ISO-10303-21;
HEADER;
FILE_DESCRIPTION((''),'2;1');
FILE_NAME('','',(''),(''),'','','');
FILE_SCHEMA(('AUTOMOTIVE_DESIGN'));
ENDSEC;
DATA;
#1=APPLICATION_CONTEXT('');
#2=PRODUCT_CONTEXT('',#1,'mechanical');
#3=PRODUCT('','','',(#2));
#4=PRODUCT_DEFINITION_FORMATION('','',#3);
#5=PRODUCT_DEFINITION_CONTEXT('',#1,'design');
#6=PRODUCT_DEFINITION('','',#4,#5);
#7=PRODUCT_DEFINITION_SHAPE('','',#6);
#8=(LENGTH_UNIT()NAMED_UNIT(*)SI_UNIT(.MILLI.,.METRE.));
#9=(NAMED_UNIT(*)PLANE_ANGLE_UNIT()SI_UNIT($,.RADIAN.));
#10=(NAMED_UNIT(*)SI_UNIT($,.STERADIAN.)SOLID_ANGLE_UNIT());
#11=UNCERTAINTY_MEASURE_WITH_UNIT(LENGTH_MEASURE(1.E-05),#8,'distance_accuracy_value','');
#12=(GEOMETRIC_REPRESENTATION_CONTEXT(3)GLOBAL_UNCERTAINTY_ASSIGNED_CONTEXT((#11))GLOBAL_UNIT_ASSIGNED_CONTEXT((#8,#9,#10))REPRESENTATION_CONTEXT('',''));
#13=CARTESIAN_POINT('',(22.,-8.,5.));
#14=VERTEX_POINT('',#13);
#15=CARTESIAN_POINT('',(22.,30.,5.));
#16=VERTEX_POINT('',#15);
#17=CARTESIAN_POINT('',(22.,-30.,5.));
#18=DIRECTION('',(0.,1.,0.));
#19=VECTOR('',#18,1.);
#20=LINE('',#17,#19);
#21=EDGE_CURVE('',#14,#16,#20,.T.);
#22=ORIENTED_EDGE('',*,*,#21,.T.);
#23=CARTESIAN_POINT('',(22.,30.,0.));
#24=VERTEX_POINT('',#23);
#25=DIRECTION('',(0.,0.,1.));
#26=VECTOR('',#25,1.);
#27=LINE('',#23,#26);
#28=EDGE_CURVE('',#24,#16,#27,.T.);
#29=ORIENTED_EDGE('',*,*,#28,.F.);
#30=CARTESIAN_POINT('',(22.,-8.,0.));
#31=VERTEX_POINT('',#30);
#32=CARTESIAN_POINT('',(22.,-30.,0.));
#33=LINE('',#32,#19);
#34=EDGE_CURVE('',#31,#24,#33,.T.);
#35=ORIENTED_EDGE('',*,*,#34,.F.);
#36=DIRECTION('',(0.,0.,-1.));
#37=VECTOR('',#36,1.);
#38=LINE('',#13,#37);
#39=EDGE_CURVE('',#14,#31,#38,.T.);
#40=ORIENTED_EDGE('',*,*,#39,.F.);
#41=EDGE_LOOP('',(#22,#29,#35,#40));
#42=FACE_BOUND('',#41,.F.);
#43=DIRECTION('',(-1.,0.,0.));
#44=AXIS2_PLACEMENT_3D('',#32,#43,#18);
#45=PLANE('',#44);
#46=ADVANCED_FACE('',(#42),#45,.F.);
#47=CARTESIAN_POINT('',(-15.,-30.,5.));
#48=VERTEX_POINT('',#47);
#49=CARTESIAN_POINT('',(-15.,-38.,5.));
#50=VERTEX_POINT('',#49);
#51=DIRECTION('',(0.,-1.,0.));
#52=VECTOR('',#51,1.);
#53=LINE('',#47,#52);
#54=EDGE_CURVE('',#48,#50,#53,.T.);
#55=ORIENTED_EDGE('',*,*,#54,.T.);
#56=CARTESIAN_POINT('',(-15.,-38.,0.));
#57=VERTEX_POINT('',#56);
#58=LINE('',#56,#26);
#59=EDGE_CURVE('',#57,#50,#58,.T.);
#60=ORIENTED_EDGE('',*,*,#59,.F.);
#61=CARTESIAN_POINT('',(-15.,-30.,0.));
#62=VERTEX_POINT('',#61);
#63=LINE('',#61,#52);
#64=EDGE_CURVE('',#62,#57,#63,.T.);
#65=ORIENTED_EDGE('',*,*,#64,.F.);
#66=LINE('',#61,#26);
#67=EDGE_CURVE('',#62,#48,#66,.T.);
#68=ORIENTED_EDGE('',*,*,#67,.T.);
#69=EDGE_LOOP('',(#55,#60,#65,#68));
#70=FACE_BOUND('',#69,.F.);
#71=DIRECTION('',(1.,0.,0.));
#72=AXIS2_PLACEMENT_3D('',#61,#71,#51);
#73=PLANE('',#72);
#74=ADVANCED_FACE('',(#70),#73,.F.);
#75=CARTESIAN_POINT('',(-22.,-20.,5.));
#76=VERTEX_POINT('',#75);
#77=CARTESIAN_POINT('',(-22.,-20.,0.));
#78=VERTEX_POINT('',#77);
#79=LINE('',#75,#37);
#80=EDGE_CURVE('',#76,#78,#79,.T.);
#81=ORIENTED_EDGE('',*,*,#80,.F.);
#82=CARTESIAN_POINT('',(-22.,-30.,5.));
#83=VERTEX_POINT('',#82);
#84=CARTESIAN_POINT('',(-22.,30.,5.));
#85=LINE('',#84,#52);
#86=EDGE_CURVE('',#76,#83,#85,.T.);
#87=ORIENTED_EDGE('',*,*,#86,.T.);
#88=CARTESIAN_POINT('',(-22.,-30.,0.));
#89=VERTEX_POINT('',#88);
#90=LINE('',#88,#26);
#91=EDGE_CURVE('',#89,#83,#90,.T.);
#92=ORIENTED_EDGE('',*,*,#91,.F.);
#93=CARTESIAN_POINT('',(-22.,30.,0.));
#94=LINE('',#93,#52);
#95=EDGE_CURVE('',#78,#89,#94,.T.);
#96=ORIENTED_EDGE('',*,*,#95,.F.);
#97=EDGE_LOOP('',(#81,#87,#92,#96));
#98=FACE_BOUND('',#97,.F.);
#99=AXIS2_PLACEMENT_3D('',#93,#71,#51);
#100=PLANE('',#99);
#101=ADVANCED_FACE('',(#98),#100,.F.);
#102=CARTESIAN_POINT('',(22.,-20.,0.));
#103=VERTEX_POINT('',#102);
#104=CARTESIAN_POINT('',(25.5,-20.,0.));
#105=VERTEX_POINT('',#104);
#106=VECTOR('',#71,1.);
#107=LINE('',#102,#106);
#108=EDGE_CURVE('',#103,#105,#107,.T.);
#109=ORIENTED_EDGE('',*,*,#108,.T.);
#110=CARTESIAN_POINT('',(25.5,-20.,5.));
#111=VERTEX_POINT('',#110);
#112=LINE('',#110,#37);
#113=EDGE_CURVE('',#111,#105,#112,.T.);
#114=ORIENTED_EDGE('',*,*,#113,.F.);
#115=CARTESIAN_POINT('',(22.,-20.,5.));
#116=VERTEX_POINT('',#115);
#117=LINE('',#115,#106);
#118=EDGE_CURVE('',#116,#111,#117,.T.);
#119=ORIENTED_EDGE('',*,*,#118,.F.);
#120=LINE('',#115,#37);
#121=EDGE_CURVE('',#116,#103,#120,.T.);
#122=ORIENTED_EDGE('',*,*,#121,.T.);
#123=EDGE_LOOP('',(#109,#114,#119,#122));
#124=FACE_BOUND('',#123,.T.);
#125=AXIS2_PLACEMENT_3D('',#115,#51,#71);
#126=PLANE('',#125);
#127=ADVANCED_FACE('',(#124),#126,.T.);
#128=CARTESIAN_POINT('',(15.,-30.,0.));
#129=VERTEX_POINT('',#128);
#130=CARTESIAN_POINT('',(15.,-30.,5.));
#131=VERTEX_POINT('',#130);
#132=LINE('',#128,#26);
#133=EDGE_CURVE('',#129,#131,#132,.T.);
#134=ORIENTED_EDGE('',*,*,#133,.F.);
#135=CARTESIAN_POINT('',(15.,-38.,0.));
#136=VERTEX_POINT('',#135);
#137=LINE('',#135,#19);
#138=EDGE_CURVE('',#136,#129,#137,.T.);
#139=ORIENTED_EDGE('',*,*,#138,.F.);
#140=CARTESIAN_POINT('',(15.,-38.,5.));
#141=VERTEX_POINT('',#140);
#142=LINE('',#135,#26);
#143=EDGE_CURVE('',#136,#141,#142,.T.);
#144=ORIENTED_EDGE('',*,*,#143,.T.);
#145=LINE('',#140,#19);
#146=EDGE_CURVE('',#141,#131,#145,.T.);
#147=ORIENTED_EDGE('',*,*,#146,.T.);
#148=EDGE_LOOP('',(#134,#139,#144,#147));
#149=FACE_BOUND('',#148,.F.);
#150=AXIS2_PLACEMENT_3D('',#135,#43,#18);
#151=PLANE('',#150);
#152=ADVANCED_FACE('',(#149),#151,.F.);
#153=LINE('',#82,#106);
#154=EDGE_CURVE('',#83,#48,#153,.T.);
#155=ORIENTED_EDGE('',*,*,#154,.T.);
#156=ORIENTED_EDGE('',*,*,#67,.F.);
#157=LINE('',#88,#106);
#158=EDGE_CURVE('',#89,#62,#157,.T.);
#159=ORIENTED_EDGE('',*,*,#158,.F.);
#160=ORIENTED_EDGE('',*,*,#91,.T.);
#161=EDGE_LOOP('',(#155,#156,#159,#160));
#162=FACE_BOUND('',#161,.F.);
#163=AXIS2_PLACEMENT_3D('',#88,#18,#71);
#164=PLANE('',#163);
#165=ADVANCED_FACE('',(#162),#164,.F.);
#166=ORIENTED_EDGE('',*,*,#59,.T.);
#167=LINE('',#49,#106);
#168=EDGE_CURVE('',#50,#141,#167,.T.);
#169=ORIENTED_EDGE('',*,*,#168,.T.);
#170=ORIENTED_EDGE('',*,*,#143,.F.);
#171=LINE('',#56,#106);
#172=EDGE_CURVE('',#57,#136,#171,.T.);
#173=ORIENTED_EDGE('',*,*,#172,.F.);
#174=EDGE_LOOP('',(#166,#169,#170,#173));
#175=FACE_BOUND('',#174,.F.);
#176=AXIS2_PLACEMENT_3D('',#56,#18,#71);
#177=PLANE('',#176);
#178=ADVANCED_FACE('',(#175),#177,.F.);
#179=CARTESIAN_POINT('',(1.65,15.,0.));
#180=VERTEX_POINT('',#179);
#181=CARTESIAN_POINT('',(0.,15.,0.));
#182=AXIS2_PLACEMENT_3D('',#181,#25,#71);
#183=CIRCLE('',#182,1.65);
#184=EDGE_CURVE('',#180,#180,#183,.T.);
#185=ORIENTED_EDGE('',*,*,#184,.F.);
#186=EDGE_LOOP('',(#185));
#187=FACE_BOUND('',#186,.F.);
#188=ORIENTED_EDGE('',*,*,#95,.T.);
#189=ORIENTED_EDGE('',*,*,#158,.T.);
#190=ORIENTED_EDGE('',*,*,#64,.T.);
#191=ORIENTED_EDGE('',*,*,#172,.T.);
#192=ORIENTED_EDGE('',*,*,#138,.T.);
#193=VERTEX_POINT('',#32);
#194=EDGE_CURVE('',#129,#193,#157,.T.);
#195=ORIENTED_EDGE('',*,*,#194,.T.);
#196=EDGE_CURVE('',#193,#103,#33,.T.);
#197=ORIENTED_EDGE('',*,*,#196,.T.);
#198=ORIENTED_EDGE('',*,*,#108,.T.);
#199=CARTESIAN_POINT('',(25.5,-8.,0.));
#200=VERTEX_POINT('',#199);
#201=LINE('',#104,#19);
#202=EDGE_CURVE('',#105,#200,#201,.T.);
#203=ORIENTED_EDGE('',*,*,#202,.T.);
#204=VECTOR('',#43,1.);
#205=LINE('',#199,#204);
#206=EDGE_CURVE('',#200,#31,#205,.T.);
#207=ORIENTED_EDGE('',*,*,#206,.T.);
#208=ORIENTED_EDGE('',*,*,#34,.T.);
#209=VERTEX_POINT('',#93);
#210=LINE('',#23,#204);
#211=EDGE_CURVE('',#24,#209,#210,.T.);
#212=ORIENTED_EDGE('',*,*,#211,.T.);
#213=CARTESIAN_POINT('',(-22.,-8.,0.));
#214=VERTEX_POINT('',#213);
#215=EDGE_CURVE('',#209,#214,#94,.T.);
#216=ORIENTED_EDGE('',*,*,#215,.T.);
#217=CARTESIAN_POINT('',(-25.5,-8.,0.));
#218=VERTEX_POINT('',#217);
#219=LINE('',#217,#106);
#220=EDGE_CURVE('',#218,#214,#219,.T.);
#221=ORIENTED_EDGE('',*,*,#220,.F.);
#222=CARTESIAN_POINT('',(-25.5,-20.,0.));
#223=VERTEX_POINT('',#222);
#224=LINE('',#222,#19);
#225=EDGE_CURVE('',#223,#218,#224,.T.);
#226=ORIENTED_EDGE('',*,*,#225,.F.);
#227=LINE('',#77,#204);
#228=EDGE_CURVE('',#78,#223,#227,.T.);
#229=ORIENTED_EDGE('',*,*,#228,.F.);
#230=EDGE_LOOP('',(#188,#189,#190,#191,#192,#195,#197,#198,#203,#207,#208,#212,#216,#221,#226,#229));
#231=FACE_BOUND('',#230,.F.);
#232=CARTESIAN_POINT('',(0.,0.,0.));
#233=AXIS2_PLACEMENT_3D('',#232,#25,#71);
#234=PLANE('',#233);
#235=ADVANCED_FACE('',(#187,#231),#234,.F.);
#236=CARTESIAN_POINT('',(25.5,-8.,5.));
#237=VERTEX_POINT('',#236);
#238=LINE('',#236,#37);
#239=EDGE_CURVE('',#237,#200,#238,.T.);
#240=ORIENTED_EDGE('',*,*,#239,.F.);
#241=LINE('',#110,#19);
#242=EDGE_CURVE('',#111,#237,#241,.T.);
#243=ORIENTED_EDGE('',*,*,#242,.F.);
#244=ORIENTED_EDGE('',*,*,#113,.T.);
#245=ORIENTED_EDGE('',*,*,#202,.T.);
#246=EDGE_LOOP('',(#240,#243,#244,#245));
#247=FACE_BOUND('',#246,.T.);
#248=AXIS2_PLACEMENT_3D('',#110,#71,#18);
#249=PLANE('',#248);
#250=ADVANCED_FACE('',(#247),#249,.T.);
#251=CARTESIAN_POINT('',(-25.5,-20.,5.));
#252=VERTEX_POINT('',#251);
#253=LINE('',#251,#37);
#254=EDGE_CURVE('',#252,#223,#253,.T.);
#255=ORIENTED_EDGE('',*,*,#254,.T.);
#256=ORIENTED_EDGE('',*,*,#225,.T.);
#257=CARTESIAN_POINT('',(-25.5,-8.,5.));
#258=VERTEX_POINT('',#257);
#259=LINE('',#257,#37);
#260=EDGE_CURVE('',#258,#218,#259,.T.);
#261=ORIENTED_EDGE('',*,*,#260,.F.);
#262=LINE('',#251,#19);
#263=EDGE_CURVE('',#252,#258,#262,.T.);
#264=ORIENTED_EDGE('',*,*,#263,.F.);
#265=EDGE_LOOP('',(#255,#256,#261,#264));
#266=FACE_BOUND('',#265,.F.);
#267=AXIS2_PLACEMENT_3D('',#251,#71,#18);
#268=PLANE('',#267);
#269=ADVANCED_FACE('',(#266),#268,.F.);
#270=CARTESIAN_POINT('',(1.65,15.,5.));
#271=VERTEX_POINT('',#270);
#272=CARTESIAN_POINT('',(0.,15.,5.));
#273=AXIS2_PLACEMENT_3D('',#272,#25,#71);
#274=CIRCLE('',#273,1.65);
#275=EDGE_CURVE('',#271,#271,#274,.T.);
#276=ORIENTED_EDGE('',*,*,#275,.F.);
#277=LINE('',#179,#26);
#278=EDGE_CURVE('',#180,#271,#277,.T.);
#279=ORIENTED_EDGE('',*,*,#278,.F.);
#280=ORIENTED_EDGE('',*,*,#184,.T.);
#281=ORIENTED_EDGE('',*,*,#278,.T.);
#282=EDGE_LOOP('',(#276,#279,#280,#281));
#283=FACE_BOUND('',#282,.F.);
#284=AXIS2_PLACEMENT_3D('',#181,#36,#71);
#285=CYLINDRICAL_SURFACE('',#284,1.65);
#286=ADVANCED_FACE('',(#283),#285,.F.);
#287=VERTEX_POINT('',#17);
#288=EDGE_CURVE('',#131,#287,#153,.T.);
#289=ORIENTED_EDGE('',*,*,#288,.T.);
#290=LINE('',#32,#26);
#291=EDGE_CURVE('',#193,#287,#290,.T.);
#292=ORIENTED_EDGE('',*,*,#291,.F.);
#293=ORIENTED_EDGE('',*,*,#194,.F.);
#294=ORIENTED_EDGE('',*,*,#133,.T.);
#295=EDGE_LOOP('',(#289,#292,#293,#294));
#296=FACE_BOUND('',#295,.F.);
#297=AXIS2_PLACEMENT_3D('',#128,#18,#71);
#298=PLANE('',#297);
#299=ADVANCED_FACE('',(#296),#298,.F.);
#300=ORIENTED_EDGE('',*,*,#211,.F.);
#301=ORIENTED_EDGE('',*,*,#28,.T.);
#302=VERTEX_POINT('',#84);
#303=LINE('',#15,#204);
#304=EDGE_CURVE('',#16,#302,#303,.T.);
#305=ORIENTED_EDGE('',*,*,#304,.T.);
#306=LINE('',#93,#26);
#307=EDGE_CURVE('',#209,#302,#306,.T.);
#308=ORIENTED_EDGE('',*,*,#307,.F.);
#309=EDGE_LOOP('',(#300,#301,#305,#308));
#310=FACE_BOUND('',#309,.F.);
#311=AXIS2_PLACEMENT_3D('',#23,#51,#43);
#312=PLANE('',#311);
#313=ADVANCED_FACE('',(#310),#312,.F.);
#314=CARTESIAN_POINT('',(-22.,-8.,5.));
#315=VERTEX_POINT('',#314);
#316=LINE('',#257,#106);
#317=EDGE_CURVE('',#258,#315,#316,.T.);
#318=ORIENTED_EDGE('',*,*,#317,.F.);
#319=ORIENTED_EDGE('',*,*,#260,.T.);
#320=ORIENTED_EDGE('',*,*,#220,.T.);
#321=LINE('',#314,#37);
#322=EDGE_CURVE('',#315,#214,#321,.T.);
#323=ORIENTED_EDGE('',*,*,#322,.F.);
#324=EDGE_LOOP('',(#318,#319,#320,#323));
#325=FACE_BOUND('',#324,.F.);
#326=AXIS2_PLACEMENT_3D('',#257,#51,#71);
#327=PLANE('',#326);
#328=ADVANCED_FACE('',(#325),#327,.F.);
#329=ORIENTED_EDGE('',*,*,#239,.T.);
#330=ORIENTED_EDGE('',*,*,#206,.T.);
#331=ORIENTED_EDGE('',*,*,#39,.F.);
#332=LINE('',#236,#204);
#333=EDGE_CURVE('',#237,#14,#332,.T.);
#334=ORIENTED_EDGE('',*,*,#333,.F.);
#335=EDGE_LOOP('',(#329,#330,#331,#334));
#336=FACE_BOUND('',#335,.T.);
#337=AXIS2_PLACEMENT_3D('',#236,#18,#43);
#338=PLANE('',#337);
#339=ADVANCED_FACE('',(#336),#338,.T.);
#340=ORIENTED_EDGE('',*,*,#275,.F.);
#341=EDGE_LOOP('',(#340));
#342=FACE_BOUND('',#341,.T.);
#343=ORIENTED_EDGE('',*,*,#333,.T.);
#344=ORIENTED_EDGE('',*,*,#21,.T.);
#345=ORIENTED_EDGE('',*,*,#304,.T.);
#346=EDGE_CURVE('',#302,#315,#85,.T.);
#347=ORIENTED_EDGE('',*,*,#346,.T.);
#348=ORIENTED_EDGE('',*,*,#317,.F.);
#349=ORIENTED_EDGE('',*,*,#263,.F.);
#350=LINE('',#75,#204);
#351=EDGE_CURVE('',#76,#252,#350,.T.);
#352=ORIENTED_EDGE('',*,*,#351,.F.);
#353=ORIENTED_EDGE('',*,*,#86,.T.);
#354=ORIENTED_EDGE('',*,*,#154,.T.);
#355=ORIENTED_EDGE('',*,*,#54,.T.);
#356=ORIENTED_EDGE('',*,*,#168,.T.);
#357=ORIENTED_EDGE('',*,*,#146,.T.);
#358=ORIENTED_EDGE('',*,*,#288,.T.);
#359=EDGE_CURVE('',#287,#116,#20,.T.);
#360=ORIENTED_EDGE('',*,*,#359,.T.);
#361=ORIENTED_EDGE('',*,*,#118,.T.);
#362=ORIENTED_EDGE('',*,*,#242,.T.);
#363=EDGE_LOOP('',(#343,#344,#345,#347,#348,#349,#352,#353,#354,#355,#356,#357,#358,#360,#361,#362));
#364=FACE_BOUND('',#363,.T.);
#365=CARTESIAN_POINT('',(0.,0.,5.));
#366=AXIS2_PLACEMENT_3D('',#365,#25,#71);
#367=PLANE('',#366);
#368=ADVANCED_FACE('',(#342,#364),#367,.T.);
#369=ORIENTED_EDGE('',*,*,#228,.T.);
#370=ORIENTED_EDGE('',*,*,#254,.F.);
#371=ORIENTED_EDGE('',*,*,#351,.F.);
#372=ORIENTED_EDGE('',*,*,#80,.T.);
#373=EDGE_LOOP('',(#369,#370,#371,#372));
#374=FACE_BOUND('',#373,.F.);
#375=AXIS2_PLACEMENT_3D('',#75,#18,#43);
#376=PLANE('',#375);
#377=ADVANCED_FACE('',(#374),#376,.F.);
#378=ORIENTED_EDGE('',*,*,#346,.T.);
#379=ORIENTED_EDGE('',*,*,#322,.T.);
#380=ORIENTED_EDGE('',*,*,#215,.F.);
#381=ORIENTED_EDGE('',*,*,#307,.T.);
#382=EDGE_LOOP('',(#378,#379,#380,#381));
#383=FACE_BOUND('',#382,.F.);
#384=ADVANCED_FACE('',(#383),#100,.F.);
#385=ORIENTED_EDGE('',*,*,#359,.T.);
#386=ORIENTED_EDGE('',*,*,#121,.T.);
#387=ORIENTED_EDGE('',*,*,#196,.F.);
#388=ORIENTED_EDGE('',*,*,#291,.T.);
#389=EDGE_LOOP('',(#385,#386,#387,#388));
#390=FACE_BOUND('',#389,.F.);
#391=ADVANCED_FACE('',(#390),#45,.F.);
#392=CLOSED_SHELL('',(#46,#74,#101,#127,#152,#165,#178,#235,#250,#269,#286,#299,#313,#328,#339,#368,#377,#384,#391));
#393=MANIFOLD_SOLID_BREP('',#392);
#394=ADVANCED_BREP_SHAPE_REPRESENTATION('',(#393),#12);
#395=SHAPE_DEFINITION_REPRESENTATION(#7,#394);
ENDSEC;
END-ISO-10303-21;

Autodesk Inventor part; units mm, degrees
ref_plane "YZ Plane" through (0, 0, 0) normal (1, 0, 0) x (0, 1, 0)
ref_plane "XZ Plane" through (0, 0, 0) normal (0, 1, 0) x (-1, 0, 0)
ref_plane "XY Plane" through (0, 0, 0) normal (0, 0, 1) x (1, 0, 0)
sketch "Sketch1" plane through (0, 0, 0) normal (0, 0, 1) x (1, 0, 0)
  line L0 (-22, -30) -> (22, -30)
  line L1 (22, -30) -> (22, 30)
  line L2 (22, 30) -> (-22, 30)
  line L3 (-22, 30) -> (-22, -30)
  line L4 (-22, -30) -> (22, 30) construction
  line L5 (22, -30) -> (-22, 30) construction
  line L6 (-15, -38) -> (15, -38)
  line L7 (15, -38) -> (15, -30)
  line L8 (15, -30) -> (-15, -30)
  line L9 (-15, -30) -> (-15, -38)
  line L10 (-15, -38) -> (15, -30) construction
  line L11 (15, -38) -> (-15, -30) construction
  circle A0 centre (0, 15) radius 1.65
  point P0 (0, 0)
  point P1 (0, -34)
  point P2 (0, -30)
  point P3 (0, 30)
  dimension "d0" = 44
  dimension "d1" = 60
  dimension "d2" = 30
  dimension "d3" = 8
  dimension "d4" = 3.3
  dimension "d5" = 15
sketch "Sketch2" plane through (0, 0, 5) normal (0, 0, 1) x (1, 0, 0)
  line L0 (22, -30) -> (22, 30)
  line L1 (22, -20) -> (25.5, -20)
  line L2 (25.5, -20) -> (25.5, -8)
  line L3 (25.5, -8) -> (22, -8)
  line L4 (22, -8) -> (22, -20)
  line L5 (22, -30) -> (15, -30)
  line L6 (0, 0) -> (0, -38)
  line L7 (-15, -38) -> (15, -38)
  line L8 (-22, -20) -> (-25.5, -20)
  line L9 (-25.5, -20) -> (-25.5, -8)
  line L10 (-25.5, -8) -> (-22, -8)
  line L11 (-22, -8) -> (-22, -20)
  dimension "d7" = 3.5
  dimension "d8" = 12
  dimension "d9" = 10
extrude "Plate1" add sketch "Sketch1" along normal blind 5
sheet face with bend "Face2" sketch "Sketch2" thickness 5 toward (0, 0, -1) bend radius 5
bend "Bend1"
equation "\"d6\" = Thickness"
equation "\"d10\" = BendRadius"
equation "\"d11\" = BendReliefWidth"
equation "\"d13\" = MinimumRemnant"
equation "\"d12\" = BendReliefDepth"
equation "\"d14\" = TransitionRadius"
equation "\"BendRadius\" = Thickness"
equation "\"BendReliefWidth\" = Thickness"
equation "\"BendReliefDepth\" = 0.5 * Thickness"
equation "\"TransitionRadius\" = BendRadius"
equation "\"JacobiRadiusSize\" = BendRadius"
equation "\"GapSize\" = Thickness"
equation "\"Thickness\" = 5"
equation "\"MinimumRemnant\" = 10"
properties part number "Path Back End"
